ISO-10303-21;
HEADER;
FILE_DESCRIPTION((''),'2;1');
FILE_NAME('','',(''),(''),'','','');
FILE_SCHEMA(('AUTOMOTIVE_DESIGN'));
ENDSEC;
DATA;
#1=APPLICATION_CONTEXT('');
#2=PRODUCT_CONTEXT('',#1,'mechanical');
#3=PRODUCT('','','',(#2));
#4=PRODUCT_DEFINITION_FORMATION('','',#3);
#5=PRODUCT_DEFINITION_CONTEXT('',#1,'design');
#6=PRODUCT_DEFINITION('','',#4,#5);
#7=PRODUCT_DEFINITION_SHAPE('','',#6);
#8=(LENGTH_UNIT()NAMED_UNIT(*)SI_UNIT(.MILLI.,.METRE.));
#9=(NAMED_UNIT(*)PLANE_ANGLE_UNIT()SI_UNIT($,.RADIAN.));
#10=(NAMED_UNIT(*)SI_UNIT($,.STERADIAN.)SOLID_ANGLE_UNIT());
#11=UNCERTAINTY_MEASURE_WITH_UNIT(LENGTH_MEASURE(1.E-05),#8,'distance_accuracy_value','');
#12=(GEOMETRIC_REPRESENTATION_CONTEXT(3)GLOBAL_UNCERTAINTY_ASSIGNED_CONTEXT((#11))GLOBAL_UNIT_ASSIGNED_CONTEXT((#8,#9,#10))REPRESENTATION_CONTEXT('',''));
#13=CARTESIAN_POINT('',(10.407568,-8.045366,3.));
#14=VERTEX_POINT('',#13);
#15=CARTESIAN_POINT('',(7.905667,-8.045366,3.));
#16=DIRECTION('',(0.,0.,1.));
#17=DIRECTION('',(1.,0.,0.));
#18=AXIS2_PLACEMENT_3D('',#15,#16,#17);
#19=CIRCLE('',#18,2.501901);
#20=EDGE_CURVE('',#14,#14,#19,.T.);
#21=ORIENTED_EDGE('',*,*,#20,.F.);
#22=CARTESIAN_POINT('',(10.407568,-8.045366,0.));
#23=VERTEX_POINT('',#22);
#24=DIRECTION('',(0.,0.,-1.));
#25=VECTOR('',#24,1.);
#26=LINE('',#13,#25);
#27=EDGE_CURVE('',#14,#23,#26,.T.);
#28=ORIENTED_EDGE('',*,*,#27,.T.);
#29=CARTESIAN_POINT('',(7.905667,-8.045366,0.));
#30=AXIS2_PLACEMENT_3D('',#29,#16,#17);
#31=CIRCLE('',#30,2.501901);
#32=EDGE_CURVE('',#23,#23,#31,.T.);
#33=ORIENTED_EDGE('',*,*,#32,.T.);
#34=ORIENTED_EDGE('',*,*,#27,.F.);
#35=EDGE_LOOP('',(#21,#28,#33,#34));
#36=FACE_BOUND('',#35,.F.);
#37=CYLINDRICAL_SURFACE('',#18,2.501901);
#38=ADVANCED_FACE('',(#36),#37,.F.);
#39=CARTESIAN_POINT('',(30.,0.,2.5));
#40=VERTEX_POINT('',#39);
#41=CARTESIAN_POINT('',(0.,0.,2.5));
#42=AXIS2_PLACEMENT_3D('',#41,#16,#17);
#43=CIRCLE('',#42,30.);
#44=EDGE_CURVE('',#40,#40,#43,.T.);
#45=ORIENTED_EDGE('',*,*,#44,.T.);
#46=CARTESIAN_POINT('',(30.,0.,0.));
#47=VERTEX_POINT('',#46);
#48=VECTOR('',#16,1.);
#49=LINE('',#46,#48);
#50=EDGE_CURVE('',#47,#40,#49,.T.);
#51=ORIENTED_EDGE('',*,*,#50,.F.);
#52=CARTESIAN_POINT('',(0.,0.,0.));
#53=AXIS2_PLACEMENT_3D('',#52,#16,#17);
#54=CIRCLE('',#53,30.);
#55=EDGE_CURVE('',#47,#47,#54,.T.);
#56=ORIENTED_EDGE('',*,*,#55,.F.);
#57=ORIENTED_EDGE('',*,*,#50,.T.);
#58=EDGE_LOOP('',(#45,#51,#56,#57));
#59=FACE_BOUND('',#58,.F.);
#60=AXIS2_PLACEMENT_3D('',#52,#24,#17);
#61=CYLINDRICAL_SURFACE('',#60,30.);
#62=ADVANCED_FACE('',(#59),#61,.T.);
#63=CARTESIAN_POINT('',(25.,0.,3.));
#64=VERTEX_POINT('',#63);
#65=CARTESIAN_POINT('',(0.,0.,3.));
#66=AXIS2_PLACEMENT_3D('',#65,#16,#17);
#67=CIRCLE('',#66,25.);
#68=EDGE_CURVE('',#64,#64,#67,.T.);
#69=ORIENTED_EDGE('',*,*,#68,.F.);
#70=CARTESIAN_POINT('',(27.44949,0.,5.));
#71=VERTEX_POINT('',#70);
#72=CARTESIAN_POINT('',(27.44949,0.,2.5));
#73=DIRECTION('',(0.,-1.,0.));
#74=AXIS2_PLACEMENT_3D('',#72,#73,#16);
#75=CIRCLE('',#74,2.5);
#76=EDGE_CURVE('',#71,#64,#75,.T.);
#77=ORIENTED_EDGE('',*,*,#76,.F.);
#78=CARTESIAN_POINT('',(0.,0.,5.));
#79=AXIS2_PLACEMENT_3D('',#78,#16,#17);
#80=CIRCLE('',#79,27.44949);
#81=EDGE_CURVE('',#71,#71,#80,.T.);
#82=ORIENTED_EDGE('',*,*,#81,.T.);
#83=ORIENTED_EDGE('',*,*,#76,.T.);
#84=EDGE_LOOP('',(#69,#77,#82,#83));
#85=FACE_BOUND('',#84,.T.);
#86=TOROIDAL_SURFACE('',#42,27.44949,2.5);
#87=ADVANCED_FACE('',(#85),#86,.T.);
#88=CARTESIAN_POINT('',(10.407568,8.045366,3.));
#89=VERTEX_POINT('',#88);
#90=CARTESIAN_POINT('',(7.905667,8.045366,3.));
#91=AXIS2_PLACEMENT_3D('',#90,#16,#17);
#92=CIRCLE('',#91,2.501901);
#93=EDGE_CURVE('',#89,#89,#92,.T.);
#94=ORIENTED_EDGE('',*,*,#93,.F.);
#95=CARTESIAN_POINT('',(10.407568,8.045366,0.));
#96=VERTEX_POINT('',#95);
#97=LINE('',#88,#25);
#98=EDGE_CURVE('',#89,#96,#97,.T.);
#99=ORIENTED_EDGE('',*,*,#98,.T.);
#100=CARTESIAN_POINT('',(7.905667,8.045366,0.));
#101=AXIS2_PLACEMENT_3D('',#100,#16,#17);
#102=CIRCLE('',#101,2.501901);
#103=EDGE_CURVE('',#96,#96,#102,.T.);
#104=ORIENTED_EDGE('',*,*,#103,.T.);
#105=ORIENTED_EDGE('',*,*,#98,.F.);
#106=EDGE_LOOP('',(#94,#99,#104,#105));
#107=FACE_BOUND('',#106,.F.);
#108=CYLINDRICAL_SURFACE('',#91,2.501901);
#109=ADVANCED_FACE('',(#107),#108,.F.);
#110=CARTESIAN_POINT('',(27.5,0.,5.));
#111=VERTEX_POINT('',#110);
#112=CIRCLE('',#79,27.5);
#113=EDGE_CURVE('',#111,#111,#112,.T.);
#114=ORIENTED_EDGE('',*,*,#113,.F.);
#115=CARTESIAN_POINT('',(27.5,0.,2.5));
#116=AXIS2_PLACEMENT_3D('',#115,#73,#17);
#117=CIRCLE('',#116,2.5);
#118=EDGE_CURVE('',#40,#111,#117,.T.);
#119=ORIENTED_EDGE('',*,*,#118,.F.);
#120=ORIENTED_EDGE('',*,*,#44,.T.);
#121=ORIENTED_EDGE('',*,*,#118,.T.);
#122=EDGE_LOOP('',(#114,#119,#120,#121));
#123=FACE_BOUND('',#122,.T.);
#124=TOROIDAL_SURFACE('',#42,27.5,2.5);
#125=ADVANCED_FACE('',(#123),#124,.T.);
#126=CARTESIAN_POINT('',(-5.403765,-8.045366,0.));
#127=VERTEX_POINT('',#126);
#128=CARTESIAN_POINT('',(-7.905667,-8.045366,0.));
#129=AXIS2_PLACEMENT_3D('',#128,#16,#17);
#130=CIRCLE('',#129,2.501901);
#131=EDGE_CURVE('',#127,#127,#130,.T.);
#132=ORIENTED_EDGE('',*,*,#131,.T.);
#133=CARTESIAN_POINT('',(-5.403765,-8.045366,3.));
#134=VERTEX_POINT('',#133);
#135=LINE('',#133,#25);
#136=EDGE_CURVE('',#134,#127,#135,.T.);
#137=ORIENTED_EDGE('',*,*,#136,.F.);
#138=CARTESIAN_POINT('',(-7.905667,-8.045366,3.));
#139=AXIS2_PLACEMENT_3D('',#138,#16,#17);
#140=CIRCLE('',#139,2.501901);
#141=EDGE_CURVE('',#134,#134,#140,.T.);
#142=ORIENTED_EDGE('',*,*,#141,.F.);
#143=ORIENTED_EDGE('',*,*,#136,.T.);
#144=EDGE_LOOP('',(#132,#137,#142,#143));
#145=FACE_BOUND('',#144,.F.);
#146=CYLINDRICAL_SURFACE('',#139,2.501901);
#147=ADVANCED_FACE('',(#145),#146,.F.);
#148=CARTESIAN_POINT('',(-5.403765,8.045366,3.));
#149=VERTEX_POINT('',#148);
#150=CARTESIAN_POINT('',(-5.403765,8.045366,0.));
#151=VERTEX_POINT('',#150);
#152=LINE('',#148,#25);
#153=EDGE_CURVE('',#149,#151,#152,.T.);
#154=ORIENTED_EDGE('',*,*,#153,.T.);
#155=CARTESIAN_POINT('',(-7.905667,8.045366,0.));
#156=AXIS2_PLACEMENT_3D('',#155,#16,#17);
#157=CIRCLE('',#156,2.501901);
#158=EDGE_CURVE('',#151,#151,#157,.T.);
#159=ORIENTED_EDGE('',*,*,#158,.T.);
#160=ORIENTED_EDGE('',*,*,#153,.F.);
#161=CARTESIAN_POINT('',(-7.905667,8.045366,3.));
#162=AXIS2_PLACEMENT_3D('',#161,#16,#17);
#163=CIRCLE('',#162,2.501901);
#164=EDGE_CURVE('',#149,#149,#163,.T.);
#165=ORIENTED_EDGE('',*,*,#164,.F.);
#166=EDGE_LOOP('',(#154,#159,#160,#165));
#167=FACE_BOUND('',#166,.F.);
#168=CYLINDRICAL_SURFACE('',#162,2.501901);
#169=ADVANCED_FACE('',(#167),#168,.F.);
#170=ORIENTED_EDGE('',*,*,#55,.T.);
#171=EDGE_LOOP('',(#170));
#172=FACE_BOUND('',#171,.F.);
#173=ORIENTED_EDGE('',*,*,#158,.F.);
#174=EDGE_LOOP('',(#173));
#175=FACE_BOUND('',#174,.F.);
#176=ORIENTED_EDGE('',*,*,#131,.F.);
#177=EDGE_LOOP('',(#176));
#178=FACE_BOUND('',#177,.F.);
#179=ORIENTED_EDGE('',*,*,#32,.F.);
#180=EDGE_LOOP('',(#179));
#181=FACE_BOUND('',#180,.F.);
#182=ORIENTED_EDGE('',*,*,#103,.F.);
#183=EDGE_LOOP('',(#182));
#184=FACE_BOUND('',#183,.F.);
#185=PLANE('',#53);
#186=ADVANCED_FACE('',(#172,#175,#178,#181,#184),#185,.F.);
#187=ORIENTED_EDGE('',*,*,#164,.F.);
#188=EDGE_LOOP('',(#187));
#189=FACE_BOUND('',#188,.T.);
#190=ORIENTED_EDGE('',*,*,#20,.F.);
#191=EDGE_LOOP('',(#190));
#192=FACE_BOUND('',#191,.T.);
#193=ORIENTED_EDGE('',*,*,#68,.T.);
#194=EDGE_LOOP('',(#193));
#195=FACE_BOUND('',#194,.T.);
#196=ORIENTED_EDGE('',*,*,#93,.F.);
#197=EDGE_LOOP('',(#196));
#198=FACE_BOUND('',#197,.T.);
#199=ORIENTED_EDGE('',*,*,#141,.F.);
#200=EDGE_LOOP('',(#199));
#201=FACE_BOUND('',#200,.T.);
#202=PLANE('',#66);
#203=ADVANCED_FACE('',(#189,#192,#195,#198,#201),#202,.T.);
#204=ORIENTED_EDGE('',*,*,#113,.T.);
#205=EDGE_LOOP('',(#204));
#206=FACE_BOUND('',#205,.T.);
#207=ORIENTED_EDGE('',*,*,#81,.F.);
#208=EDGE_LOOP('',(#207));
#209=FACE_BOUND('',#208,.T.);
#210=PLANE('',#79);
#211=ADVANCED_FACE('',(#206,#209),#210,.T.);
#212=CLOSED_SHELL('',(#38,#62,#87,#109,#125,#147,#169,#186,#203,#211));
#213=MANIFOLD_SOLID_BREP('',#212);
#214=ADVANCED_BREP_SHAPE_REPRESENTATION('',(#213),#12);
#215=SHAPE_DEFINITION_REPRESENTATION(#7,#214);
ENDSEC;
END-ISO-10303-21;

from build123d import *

# Parameters (mm, degrees)
F0_R     = 25
F1_DEPTH = 3
F0_R_2   = 30
F2_DEPTH = 5
F4_R     = 2.5019013152
F5_DEPTH = 25


# Not quite as in the source:
# - a fillet or chamfer that OpenCascade refuses, or shapes differently, is made with other operations: its cross-section is extruded or revolved along the edge and cut away or added


with BuildPart() as f1:
    # F0 (on Top) → F1 (new body)
    with BuildSketch(Plane.XY):
        Circle(F0_R)
    extrude(amount=F1_DEPTH)

    # F0 (on Top) → F2 (join)
    with BuildSketch(Plane.XY):
        Circle(F0_R_2)
        Circle(F0_R, mode=Mode.SUBTRACT)
    extrude(amount=F2_DEPTH)

    # F3: fillet of radius 2.5 on 2 edges, made by hand

    # F3_s1 → F3_t2 (revolve, cut)
    with BuildSketch(Plane.XZ):
        with BuildLine():
            ThreePointArc((30, 2.5), (29.267766953, 4.267766953), (27.5, 5))
            Line((27.5, 5), (30, 5))
            Line((30, 5), (30, 2.5))
        make_face()
    revolve(axis=Axis((0, 0, 5), (0, 0, 1)), mode=Mode.SUBTRACT)

    # F3_s3 → F3_t4 (revolve, cut)
    with BuildSketch(Plane.XZ):
        with BuildLine():
            ThreePointArc((27.4494897428, 5), (25.8683509127, 4.4364916731), (25, 3))
            Line((25, 3), (25, 5))
            Line((25, 5), (27.4494897428, 5))
        make_face()
    revolve(axis=Axis((0, 0, 5), (0, 0, 1)), mode=Mode.SUBTRACT)

    # F4 (on face) → F5 (cut)
    with BuildSketch(Plane.XY.offset(3)):
        with Locations((-7.9056667164, 8.0453660339)):
            Circle(F4_R)
        with Locations((7.9056667164, -8.0453660339)):
            Circle(F4_R)
        with Locations((7.9056667164, 8.0453660339)):
            Circle(F4_R)
        with Locations((-7.9056667164, -8.0453660339)):
            Circle(F4_R)
    extrude(amount=-F5_DEPTH, mode=Mode.SUBTRACT)


solid = f1.part
